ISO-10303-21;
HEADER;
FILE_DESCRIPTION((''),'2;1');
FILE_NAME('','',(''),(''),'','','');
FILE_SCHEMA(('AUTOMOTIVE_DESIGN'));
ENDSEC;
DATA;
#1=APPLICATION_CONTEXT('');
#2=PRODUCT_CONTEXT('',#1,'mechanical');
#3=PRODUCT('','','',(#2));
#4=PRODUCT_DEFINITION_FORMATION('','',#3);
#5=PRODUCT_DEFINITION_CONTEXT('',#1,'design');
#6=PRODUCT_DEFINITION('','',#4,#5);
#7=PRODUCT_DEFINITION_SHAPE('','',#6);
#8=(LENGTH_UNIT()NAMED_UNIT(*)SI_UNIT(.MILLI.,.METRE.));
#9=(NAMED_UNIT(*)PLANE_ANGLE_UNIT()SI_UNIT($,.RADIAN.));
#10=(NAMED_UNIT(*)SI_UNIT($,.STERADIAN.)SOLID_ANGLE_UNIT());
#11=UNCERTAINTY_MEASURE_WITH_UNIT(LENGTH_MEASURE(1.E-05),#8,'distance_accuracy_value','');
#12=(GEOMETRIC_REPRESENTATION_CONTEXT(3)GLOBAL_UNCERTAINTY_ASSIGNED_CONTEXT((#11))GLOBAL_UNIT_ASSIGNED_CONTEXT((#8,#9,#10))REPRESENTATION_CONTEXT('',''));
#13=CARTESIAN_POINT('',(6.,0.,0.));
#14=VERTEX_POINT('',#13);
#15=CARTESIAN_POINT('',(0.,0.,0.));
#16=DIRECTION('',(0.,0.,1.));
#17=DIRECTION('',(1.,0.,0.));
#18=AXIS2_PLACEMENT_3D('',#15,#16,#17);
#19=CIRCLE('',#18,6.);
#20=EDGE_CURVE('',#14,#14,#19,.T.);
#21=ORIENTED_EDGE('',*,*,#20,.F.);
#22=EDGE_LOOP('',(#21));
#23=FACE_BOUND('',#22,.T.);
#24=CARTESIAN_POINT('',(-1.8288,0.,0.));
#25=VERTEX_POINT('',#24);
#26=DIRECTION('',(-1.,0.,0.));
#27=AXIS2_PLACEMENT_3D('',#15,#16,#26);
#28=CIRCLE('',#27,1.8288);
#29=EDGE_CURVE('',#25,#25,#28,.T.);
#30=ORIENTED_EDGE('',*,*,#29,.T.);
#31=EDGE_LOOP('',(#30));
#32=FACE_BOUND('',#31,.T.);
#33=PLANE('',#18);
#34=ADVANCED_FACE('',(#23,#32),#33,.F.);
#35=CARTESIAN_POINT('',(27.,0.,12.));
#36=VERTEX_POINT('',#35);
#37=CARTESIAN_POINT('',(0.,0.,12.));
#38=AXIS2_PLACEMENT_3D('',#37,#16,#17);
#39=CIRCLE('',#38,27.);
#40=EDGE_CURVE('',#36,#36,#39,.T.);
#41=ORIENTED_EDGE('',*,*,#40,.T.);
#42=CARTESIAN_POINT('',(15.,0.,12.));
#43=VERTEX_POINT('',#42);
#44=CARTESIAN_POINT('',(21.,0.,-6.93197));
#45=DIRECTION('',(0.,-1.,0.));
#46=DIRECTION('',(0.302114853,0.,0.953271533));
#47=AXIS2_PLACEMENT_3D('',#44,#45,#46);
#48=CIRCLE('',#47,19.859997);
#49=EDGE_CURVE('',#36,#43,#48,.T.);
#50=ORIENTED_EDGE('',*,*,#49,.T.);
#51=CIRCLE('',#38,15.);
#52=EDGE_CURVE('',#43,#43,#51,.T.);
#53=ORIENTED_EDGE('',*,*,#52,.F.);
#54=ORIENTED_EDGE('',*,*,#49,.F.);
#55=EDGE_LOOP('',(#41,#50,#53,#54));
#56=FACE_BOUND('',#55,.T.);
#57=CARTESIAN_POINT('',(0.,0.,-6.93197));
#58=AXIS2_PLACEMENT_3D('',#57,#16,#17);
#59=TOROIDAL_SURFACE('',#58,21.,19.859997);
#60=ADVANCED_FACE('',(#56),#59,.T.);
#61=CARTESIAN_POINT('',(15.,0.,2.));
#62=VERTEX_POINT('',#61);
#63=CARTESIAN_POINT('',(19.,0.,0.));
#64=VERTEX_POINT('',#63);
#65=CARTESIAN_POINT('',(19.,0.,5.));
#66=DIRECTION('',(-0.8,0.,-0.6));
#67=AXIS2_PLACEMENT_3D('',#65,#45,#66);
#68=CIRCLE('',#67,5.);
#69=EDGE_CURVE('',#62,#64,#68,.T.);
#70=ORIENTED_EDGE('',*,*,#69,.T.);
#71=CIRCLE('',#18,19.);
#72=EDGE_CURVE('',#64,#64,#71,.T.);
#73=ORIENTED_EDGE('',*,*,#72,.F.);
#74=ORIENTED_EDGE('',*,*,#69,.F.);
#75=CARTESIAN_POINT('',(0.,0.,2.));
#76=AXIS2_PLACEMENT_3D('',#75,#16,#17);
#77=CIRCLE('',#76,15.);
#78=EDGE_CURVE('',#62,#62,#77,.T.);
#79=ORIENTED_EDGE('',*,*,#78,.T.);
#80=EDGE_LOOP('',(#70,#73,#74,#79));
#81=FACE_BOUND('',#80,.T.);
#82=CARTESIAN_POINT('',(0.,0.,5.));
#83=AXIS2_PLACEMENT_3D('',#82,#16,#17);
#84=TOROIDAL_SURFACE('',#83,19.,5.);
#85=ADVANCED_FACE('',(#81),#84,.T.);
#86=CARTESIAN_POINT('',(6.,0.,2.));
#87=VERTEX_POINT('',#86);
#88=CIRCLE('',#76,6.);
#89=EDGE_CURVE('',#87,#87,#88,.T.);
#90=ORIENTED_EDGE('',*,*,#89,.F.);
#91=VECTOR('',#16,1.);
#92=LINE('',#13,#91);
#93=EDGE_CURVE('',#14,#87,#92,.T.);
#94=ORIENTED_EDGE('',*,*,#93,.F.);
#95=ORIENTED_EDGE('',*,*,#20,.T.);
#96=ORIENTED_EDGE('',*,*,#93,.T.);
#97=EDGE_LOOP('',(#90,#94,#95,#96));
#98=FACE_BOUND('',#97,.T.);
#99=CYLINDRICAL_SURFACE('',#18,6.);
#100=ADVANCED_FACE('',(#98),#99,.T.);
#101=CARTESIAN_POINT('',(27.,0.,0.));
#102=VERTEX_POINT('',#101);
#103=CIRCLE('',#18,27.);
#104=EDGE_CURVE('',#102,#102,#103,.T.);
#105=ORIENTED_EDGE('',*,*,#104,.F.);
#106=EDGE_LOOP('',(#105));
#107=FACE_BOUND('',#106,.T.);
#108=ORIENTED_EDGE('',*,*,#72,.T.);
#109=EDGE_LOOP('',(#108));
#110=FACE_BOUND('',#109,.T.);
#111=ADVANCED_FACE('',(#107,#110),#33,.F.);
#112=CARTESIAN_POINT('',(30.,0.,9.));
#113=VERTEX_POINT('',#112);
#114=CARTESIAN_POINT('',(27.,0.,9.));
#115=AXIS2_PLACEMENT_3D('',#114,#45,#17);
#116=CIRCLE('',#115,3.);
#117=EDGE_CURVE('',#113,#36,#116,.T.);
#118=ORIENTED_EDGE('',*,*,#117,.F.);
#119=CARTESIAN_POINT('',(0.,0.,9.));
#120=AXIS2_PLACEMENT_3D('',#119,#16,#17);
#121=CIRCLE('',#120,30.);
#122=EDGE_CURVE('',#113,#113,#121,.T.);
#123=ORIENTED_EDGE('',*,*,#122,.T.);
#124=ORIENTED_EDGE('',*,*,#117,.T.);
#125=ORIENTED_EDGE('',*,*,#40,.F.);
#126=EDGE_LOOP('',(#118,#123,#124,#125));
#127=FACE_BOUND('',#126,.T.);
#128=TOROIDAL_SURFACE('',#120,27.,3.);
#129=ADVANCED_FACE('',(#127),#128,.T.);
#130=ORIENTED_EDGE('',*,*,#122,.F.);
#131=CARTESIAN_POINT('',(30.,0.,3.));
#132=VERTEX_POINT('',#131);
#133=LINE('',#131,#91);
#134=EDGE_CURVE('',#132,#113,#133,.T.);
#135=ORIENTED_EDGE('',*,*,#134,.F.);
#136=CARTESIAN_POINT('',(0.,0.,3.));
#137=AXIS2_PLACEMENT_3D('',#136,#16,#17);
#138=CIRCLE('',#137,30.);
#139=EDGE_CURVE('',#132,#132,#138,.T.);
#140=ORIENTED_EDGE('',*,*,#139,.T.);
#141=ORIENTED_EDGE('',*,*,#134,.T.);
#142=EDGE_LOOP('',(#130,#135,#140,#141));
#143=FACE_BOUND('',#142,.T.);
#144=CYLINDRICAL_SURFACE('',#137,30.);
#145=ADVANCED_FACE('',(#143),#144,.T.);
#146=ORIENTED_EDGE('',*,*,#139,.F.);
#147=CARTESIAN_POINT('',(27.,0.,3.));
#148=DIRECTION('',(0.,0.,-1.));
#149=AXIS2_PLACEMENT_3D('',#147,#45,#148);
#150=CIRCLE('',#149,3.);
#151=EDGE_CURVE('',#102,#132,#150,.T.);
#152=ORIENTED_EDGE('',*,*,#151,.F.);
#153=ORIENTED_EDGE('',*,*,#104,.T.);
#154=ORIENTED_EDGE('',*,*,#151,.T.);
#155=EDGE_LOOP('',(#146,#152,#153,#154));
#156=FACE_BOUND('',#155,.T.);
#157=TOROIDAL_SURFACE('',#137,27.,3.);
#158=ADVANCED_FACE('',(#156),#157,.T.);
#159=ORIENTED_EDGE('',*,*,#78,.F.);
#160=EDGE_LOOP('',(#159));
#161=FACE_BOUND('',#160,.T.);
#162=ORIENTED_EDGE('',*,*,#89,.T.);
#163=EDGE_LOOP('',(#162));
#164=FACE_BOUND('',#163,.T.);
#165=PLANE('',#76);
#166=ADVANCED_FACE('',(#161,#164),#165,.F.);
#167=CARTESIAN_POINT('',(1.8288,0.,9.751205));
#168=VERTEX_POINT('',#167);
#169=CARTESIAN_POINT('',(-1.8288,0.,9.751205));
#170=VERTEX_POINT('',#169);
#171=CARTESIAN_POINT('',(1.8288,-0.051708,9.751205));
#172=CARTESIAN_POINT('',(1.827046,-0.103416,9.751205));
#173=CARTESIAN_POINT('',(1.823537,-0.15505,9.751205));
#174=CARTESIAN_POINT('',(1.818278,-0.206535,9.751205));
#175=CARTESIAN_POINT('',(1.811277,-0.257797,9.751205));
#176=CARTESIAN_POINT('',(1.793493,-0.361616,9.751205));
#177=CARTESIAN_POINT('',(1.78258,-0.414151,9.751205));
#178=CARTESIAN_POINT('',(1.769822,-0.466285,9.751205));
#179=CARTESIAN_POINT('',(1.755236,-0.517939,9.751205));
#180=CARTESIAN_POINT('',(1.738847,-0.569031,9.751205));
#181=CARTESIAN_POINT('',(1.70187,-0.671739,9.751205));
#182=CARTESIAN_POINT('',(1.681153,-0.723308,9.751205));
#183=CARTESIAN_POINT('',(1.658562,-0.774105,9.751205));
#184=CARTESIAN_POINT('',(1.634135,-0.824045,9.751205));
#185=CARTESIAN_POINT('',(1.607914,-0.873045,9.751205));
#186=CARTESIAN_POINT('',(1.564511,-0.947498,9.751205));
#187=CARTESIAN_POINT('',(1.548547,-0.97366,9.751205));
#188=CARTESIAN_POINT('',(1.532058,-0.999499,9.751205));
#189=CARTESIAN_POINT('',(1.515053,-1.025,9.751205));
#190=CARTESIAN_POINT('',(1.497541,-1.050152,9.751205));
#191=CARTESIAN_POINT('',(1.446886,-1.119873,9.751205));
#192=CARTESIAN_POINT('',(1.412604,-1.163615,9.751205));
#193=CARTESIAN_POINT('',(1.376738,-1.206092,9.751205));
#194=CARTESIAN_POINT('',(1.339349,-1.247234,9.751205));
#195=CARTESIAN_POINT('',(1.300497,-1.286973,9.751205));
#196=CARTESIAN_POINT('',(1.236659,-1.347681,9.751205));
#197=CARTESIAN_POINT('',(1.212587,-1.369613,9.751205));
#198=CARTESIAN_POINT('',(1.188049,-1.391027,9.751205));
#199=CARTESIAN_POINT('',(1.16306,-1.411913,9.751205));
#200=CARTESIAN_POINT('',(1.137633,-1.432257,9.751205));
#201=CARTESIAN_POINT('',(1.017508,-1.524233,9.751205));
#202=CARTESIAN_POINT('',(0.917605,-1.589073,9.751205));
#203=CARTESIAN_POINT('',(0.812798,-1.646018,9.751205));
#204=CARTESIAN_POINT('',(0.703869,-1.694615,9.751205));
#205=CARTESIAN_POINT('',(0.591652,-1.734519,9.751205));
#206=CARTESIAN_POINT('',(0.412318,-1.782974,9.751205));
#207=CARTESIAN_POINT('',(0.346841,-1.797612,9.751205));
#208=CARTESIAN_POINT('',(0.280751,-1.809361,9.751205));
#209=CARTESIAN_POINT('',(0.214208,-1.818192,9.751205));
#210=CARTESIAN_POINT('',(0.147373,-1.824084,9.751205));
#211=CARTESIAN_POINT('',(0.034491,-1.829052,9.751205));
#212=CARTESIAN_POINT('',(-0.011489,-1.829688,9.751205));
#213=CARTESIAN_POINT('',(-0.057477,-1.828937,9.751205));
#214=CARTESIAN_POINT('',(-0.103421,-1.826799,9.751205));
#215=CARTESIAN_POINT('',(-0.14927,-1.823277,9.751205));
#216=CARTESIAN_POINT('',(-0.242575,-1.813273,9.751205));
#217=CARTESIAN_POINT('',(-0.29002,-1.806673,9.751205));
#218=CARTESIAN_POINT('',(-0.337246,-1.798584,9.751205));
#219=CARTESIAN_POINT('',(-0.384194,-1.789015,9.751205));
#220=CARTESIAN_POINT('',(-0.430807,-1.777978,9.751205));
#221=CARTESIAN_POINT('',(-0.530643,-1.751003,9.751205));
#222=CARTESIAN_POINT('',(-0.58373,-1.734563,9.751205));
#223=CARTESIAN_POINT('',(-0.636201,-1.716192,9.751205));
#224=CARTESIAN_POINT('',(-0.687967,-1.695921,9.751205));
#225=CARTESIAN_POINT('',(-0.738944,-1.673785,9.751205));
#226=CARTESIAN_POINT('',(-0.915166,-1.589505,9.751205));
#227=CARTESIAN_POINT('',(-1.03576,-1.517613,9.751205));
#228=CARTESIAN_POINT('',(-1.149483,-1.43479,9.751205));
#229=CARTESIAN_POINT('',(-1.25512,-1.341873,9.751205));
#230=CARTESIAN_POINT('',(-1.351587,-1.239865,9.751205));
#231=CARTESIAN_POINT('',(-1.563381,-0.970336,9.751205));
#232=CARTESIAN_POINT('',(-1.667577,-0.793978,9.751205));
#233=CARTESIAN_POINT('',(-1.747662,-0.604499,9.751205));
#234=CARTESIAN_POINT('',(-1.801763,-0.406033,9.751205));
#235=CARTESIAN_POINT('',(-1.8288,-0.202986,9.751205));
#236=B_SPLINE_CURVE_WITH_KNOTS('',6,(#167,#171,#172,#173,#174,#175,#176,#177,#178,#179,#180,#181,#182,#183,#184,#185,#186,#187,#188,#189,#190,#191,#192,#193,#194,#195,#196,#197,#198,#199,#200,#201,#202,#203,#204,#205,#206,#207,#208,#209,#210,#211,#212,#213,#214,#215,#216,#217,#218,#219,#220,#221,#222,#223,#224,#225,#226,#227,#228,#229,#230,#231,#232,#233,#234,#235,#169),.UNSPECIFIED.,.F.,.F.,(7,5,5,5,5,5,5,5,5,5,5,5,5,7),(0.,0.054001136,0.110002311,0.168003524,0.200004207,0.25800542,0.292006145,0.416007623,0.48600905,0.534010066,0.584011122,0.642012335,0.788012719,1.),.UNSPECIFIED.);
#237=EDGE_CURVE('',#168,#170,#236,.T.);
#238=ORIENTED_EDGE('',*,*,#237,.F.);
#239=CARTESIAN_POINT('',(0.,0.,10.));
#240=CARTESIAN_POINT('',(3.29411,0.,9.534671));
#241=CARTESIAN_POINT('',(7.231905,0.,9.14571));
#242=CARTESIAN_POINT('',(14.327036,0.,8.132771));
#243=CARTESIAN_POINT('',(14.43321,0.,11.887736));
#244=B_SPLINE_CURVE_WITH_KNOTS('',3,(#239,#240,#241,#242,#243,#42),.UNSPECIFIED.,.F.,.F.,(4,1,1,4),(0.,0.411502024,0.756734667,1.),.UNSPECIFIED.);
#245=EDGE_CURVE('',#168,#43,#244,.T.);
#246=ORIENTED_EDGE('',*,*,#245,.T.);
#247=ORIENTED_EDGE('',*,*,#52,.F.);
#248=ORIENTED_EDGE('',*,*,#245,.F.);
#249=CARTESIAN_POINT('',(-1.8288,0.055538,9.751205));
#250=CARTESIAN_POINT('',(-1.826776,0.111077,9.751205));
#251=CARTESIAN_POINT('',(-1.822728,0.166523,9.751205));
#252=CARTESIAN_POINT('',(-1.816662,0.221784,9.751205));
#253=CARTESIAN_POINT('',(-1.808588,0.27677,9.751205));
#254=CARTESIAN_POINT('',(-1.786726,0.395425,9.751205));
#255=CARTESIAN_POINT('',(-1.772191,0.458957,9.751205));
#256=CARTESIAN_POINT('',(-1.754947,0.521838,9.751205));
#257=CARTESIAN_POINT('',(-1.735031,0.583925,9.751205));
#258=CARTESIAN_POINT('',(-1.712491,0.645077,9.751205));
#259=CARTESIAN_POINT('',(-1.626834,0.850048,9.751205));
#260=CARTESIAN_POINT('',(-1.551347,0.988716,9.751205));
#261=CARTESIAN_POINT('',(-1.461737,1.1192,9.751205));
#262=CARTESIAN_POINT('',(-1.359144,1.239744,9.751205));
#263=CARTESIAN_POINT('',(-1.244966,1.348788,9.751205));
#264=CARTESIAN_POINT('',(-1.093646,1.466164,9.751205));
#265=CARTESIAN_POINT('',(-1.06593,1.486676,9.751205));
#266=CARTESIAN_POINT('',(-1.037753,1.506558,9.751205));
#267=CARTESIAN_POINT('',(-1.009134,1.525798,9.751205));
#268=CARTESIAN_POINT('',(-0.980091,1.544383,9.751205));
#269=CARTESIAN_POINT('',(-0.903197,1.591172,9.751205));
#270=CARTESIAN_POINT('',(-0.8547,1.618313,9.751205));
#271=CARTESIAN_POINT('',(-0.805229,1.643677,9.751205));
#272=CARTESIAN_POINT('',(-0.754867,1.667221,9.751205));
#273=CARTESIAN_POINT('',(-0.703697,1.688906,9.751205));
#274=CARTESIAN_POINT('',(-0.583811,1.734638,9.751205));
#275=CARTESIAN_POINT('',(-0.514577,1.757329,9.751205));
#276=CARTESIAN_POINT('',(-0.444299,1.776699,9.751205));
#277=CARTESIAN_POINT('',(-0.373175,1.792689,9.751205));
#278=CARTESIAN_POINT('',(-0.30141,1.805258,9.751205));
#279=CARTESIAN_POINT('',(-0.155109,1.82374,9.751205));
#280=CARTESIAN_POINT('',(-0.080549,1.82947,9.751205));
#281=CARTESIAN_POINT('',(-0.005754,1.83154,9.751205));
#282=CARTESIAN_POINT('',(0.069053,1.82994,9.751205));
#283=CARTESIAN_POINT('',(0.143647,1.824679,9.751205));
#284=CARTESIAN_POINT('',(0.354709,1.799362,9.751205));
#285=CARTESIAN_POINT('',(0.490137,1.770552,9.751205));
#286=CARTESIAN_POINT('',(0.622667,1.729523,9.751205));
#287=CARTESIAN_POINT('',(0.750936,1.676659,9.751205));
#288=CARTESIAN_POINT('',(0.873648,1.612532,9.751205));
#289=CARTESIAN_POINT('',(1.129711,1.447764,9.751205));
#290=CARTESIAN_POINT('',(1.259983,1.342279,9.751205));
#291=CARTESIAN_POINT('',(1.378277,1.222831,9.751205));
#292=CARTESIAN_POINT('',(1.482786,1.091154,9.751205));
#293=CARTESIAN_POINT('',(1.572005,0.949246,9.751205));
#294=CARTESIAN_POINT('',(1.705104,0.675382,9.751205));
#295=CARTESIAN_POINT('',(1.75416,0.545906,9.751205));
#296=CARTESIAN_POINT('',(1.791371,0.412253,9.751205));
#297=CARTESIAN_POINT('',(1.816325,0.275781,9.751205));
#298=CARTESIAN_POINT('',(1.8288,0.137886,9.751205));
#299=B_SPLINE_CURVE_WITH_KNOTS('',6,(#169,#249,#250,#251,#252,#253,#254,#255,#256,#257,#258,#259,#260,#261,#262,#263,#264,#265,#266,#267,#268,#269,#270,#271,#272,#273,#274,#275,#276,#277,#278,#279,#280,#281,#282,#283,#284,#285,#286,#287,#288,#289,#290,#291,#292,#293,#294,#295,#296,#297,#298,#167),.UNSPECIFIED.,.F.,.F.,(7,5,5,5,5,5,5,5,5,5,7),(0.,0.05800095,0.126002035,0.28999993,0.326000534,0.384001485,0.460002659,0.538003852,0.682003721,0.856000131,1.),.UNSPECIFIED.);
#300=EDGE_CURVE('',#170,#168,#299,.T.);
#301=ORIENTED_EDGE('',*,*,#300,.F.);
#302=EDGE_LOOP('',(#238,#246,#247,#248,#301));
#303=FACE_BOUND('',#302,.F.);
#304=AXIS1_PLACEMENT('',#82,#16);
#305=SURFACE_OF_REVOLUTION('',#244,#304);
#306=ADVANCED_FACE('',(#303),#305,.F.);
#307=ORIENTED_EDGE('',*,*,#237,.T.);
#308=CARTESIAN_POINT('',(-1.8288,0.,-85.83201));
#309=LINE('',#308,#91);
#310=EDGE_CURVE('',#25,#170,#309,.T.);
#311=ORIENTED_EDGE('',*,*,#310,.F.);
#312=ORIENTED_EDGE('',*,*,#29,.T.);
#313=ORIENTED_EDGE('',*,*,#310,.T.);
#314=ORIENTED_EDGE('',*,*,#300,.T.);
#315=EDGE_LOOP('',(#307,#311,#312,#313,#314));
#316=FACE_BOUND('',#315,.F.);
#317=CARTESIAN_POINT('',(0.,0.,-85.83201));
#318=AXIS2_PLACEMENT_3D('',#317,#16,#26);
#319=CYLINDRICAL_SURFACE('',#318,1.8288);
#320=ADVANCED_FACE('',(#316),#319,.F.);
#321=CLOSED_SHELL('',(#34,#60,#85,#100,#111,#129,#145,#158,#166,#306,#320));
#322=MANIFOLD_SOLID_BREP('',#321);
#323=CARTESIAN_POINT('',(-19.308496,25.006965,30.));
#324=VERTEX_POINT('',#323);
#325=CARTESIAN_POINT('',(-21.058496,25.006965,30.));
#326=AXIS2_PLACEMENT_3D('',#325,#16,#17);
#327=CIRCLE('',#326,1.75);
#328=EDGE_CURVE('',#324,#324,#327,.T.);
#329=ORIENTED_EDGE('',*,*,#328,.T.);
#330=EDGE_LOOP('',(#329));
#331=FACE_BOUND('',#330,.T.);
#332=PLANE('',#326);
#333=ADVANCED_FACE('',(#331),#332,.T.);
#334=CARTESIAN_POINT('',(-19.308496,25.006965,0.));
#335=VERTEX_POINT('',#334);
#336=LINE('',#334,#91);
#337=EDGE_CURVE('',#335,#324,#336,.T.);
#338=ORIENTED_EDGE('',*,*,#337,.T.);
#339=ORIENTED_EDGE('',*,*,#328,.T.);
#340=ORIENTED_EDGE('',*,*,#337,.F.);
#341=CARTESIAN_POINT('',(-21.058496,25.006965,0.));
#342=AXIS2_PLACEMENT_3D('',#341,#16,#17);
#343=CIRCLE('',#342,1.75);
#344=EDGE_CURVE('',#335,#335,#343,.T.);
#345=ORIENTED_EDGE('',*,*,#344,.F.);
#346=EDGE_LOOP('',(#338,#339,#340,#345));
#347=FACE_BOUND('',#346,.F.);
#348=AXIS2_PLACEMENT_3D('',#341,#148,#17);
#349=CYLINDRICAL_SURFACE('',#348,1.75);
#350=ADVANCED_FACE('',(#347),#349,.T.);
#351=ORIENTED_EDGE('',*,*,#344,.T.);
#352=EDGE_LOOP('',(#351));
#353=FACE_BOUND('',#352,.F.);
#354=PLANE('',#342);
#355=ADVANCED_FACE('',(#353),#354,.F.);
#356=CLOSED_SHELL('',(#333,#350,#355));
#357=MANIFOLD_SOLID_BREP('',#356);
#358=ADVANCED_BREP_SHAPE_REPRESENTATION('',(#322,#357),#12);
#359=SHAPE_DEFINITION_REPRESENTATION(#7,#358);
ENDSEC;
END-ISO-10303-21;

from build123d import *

# Parameters (mm, degrees)
F0_R     = 1.75
F1_DEPTH = 30
F6_D     = 3.6576


# Not quite as in the source:
# - a fillet or chamfer that OpenCascade refuses, or shapes differently, is made with other operations: its cross-section is extruded or revolved along the edge and cut away or added


with BuildPart() as f1:
    # F0 (on Top) → F1 (new body)
    with BuildSketch(Plane.XY):
        with Locations((-21.0584960878, 25.0069648027)):
            Circle(F0_R)
    extrude(amount=F1_DEPTH)


with BuildPart() as f3:
    # F2 (on Front) → F3 (revolve)
    with BuildSketch(Plane.XZ):
        with BuildLine():
            Line((0, 10), (0, 0))
            Line((0, 0), (6, 0))
            Line((6, 0), (6, 2))
            Line((6, 2), (15, 2))
            Line((15, 2), (15, 0))
            Line((15, 0), (27, 0))
            ThreePointArc((27, 0), (29.1213203436, 0.8786796564), (30, 3))
            Line((30, 3), (30, 9))
            ThreePointArc((30, 9), (29.1213203436, 11.1213203436), (27, 12))
            ThreePointArc((27, 12), (21, 12.9280272043), (15, 12))
            add(Edge.make_bspline(
                [(0, 10), (3.294109879, 9.5346706659), (7.2319046155, 9.1457099045), (14.3270360542, 8.1327705449), (14.4332102752, 11.8877358395), (15, 12)],
                knots=[0, 0, 0, 0, 0.4115020239, 0.7567346673, 1, 1, 1, 1], degree=3))
        make_face()
    revolve(axis=Axis((0, 0, 5), (0, 0, 1)))

    # F4: fillet of radius 5 on 1 edges, made by hand

    # F4_s1 → F4_t2 (revolve, cut)
    with BuildSketch(Plane.XZ):
        with BuildLine():
            ThreePointArc((15, 2), (16.7639320225, 0.527864045), (19, 0))
            Line((19, 0), (15, 0))
            Line((15, 0), (15, 2))
        make_face()
    revolve(axis=Axis((0, 0, 0), (0, 0, 1)), mode=Mode.SUBTRACT)

    # F6 (through all)
    with Locations(Plane(origin=(0, 0, 0), x_dir=(1, 0, 0), z_dir=(0, 0, -1))):
        with Locations((0, 0)):
            Hole(F6_D / 2)


solid = Compound([f1.part, f3.part])
